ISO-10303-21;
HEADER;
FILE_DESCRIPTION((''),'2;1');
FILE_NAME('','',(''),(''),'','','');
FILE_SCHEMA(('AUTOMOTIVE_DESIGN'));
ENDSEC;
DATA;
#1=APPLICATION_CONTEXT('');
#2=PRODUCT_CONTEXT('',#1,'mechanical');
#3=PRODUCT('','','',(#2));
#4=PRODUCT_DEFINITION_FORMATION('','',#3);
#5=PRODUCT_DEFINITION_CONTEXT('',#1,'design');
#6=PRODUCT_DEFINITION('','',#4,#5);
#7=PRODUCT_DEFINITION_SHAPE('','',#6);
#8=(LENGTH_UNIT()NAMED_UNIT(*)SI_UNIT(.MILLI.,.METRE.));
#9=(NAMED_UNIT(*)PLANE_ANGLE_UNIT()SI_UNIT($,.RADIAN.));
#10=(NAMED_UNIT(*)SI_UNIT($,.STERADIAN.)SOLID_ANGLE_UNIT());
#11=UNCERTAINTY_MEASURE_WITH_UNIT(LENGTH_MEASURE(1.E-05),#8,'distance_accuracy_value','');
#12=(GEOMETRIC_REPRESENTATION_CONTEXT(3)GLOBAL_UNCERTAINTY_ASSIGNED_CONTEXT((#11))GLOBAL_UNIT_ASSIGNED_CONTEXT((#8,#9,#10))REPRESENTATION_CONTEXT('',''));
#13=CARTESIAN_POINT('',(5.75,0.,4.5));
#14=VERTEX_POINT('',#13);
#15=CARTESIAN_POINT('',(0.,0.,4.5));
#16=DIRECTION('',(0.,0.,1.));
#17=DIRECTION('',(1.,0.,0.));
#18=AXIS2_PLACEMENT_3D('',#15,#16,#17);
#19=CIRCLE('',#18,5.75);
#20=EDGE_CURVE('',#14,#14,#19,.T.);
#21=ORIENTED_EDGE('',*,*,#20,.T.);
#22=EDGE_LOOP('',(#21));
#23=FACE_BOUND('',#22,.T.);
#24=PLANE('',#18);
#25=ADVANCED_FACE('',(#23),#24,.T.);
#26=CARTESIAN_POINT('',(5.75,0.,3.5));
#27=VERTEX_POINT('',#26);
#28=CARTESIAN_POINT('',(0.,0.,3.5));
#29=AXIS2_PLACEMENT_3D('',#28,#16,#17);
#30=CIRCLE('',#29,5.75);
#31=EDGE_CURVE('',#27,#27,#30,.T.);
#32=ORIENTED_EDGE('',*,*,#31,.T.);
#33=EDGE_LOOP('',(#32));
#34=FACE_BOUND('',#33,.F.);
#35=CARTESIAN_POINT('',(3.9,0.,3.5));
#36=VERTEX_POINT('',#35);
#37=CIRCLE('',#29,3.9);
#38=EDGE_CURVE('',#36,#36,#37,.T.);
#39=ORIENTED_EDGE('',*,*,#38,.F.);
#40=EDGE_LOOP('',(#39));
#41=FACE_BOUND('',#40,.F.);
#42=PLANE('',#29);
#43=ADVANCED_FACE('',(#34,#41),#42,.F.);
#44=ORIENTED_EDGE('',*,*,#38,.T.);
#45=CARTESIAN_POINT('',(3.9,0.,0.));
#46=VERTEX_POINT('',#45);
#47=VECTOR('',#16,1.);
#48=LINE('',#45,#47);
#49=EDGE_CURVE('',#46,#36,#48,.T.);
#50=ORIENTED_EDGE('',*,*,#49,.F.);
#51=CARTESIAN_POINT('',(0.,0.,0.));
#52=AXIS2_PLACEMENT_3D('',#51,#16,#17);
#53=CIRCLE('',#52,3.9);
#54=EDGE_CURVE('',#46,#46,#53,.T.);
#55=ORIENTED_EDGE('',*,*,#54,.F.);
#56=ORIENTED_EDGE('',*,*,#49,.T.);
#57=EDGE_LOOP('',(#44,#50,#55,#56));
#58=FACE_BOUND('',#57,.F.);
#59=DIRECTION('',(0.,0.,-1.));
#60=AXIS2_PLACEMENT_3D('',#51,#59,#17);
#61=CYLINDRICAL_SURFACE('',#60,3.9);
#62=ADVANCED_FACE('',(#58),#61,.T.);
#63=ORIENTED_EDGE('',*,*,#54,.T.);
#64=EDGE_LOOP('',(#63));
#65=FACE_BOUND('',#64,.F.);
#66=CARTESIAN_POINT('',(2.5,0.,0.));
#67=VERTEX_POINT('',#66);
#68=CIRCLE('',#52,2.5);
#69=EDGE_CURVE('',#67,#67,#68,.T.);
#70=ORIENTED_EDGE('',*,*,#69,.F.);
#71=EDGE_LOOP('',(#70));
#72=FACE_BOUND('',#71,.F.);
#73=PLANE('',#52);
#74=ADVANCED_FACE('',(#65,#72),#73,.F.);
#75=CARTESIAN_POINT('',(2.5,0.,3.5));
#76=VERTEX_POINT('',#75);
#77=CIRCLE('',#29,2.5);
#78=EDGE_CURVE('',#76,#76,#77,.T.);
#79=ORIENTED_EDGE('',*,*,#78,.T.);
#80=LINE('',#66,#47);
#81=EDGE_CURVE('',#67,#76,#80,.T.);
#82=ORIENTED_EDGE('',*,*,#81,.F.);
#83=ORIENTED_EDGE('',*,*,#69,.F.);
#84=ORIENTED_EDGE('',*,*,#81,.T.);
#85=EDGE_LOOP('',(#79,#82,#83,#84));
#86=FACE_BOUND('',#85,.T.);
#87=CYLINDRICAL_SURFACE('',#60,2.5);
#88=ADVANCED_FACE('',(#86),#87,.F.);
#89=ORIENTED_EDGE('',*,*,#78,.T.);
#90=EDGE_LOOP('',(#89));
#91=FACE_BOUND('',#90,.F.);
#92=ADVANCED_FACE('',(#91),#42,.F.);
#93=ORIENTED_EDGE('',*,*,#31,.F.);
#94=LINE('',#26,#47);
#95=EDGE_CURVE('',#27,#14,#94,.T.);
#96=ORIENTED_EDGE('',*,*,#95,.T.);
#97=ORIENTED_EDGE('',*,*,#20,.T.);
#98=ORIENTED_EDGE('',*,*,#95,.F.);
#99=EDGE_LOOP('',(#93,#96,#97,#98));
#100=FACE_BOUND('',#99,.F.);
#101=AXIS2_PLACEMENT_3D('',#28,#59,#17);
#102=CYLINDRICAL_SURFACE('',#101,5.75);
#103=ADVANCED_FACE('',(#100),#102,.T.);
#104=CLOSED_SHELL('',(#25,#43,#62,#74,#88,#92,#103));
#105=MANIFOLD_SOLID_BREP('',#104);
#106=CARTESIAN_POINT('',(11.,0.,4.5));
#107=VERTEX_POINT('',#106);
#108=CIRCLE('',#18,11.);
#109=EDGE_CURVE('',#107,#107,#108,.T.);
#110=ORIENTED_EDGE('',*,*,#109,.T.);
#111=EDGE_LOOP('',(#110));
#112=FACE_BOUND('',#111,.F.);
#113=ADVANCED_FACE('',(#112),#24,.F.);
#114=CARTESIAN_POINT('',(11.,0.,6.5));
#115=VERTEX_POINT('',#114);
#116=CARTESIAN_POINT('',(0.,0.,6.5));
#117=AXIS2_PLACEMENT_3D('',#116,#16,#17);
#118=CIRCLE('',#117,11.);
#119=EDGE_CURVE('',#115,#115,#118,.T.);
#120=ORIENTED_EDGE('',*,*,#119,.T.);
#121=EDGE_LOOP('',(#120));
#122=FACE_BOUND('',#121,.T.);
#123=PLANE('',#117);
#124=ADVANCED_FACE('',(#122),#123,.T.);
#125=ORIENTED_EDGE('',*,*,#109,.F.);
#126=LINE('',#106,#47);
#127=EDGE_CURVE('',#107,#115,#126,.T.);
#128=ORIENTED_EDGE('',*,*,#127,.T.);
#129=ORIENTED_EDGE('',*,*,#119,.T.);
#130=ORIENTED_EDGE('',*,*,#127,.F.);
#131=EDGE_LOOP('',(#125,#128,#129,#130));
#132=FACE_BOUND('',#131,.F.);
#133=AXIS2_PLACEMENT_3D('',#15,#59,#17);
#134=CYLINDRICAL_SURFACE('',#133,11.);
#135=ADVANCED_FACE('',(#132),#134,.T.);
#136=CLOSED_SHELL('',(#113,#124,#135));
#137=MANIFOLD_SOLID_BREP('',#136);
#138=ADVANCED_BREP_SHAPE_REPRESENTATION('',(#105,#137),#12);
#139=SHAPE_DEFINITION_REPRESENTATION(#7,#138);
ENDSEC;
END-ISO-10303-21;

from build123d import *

# Parameters (mm, degrees)
F1_START = 4.5
F0_R     = 11
F1_DEPTH = 2
F2_R     = 3.9
F2_R_2   = 2.5
F3_DEPTH = 3.5
F5_START = 3.5
F4_R     = 5.75
F5_DEPTH = 1


with BuildPart() as f1:
    # F0 (on Top) → F1 (new body)
    with BuildSketch(Plane.XY.offset(F1_START)):
        Circle(F0_R)
    extrude(amount=F1_DEPTH)


with BuildPart() as f3:
    # F2 (on Top) → F3 (new body)
    with BuildSketch(Plane.XY):
        Circle(F2_R)
        Circle(F2_R_2, mode=Mode.SUBTRACT)
    extrude(amount=F3_DEPTH)

    # F4 (on Top) → F5 (join)
    with BuildSketch(Plane.XY.offset(F5_START)):
        Circle(F4_R)
    extrude(amount=F5_DEPTH)


solid = Compound([f1.part, f3.part])
